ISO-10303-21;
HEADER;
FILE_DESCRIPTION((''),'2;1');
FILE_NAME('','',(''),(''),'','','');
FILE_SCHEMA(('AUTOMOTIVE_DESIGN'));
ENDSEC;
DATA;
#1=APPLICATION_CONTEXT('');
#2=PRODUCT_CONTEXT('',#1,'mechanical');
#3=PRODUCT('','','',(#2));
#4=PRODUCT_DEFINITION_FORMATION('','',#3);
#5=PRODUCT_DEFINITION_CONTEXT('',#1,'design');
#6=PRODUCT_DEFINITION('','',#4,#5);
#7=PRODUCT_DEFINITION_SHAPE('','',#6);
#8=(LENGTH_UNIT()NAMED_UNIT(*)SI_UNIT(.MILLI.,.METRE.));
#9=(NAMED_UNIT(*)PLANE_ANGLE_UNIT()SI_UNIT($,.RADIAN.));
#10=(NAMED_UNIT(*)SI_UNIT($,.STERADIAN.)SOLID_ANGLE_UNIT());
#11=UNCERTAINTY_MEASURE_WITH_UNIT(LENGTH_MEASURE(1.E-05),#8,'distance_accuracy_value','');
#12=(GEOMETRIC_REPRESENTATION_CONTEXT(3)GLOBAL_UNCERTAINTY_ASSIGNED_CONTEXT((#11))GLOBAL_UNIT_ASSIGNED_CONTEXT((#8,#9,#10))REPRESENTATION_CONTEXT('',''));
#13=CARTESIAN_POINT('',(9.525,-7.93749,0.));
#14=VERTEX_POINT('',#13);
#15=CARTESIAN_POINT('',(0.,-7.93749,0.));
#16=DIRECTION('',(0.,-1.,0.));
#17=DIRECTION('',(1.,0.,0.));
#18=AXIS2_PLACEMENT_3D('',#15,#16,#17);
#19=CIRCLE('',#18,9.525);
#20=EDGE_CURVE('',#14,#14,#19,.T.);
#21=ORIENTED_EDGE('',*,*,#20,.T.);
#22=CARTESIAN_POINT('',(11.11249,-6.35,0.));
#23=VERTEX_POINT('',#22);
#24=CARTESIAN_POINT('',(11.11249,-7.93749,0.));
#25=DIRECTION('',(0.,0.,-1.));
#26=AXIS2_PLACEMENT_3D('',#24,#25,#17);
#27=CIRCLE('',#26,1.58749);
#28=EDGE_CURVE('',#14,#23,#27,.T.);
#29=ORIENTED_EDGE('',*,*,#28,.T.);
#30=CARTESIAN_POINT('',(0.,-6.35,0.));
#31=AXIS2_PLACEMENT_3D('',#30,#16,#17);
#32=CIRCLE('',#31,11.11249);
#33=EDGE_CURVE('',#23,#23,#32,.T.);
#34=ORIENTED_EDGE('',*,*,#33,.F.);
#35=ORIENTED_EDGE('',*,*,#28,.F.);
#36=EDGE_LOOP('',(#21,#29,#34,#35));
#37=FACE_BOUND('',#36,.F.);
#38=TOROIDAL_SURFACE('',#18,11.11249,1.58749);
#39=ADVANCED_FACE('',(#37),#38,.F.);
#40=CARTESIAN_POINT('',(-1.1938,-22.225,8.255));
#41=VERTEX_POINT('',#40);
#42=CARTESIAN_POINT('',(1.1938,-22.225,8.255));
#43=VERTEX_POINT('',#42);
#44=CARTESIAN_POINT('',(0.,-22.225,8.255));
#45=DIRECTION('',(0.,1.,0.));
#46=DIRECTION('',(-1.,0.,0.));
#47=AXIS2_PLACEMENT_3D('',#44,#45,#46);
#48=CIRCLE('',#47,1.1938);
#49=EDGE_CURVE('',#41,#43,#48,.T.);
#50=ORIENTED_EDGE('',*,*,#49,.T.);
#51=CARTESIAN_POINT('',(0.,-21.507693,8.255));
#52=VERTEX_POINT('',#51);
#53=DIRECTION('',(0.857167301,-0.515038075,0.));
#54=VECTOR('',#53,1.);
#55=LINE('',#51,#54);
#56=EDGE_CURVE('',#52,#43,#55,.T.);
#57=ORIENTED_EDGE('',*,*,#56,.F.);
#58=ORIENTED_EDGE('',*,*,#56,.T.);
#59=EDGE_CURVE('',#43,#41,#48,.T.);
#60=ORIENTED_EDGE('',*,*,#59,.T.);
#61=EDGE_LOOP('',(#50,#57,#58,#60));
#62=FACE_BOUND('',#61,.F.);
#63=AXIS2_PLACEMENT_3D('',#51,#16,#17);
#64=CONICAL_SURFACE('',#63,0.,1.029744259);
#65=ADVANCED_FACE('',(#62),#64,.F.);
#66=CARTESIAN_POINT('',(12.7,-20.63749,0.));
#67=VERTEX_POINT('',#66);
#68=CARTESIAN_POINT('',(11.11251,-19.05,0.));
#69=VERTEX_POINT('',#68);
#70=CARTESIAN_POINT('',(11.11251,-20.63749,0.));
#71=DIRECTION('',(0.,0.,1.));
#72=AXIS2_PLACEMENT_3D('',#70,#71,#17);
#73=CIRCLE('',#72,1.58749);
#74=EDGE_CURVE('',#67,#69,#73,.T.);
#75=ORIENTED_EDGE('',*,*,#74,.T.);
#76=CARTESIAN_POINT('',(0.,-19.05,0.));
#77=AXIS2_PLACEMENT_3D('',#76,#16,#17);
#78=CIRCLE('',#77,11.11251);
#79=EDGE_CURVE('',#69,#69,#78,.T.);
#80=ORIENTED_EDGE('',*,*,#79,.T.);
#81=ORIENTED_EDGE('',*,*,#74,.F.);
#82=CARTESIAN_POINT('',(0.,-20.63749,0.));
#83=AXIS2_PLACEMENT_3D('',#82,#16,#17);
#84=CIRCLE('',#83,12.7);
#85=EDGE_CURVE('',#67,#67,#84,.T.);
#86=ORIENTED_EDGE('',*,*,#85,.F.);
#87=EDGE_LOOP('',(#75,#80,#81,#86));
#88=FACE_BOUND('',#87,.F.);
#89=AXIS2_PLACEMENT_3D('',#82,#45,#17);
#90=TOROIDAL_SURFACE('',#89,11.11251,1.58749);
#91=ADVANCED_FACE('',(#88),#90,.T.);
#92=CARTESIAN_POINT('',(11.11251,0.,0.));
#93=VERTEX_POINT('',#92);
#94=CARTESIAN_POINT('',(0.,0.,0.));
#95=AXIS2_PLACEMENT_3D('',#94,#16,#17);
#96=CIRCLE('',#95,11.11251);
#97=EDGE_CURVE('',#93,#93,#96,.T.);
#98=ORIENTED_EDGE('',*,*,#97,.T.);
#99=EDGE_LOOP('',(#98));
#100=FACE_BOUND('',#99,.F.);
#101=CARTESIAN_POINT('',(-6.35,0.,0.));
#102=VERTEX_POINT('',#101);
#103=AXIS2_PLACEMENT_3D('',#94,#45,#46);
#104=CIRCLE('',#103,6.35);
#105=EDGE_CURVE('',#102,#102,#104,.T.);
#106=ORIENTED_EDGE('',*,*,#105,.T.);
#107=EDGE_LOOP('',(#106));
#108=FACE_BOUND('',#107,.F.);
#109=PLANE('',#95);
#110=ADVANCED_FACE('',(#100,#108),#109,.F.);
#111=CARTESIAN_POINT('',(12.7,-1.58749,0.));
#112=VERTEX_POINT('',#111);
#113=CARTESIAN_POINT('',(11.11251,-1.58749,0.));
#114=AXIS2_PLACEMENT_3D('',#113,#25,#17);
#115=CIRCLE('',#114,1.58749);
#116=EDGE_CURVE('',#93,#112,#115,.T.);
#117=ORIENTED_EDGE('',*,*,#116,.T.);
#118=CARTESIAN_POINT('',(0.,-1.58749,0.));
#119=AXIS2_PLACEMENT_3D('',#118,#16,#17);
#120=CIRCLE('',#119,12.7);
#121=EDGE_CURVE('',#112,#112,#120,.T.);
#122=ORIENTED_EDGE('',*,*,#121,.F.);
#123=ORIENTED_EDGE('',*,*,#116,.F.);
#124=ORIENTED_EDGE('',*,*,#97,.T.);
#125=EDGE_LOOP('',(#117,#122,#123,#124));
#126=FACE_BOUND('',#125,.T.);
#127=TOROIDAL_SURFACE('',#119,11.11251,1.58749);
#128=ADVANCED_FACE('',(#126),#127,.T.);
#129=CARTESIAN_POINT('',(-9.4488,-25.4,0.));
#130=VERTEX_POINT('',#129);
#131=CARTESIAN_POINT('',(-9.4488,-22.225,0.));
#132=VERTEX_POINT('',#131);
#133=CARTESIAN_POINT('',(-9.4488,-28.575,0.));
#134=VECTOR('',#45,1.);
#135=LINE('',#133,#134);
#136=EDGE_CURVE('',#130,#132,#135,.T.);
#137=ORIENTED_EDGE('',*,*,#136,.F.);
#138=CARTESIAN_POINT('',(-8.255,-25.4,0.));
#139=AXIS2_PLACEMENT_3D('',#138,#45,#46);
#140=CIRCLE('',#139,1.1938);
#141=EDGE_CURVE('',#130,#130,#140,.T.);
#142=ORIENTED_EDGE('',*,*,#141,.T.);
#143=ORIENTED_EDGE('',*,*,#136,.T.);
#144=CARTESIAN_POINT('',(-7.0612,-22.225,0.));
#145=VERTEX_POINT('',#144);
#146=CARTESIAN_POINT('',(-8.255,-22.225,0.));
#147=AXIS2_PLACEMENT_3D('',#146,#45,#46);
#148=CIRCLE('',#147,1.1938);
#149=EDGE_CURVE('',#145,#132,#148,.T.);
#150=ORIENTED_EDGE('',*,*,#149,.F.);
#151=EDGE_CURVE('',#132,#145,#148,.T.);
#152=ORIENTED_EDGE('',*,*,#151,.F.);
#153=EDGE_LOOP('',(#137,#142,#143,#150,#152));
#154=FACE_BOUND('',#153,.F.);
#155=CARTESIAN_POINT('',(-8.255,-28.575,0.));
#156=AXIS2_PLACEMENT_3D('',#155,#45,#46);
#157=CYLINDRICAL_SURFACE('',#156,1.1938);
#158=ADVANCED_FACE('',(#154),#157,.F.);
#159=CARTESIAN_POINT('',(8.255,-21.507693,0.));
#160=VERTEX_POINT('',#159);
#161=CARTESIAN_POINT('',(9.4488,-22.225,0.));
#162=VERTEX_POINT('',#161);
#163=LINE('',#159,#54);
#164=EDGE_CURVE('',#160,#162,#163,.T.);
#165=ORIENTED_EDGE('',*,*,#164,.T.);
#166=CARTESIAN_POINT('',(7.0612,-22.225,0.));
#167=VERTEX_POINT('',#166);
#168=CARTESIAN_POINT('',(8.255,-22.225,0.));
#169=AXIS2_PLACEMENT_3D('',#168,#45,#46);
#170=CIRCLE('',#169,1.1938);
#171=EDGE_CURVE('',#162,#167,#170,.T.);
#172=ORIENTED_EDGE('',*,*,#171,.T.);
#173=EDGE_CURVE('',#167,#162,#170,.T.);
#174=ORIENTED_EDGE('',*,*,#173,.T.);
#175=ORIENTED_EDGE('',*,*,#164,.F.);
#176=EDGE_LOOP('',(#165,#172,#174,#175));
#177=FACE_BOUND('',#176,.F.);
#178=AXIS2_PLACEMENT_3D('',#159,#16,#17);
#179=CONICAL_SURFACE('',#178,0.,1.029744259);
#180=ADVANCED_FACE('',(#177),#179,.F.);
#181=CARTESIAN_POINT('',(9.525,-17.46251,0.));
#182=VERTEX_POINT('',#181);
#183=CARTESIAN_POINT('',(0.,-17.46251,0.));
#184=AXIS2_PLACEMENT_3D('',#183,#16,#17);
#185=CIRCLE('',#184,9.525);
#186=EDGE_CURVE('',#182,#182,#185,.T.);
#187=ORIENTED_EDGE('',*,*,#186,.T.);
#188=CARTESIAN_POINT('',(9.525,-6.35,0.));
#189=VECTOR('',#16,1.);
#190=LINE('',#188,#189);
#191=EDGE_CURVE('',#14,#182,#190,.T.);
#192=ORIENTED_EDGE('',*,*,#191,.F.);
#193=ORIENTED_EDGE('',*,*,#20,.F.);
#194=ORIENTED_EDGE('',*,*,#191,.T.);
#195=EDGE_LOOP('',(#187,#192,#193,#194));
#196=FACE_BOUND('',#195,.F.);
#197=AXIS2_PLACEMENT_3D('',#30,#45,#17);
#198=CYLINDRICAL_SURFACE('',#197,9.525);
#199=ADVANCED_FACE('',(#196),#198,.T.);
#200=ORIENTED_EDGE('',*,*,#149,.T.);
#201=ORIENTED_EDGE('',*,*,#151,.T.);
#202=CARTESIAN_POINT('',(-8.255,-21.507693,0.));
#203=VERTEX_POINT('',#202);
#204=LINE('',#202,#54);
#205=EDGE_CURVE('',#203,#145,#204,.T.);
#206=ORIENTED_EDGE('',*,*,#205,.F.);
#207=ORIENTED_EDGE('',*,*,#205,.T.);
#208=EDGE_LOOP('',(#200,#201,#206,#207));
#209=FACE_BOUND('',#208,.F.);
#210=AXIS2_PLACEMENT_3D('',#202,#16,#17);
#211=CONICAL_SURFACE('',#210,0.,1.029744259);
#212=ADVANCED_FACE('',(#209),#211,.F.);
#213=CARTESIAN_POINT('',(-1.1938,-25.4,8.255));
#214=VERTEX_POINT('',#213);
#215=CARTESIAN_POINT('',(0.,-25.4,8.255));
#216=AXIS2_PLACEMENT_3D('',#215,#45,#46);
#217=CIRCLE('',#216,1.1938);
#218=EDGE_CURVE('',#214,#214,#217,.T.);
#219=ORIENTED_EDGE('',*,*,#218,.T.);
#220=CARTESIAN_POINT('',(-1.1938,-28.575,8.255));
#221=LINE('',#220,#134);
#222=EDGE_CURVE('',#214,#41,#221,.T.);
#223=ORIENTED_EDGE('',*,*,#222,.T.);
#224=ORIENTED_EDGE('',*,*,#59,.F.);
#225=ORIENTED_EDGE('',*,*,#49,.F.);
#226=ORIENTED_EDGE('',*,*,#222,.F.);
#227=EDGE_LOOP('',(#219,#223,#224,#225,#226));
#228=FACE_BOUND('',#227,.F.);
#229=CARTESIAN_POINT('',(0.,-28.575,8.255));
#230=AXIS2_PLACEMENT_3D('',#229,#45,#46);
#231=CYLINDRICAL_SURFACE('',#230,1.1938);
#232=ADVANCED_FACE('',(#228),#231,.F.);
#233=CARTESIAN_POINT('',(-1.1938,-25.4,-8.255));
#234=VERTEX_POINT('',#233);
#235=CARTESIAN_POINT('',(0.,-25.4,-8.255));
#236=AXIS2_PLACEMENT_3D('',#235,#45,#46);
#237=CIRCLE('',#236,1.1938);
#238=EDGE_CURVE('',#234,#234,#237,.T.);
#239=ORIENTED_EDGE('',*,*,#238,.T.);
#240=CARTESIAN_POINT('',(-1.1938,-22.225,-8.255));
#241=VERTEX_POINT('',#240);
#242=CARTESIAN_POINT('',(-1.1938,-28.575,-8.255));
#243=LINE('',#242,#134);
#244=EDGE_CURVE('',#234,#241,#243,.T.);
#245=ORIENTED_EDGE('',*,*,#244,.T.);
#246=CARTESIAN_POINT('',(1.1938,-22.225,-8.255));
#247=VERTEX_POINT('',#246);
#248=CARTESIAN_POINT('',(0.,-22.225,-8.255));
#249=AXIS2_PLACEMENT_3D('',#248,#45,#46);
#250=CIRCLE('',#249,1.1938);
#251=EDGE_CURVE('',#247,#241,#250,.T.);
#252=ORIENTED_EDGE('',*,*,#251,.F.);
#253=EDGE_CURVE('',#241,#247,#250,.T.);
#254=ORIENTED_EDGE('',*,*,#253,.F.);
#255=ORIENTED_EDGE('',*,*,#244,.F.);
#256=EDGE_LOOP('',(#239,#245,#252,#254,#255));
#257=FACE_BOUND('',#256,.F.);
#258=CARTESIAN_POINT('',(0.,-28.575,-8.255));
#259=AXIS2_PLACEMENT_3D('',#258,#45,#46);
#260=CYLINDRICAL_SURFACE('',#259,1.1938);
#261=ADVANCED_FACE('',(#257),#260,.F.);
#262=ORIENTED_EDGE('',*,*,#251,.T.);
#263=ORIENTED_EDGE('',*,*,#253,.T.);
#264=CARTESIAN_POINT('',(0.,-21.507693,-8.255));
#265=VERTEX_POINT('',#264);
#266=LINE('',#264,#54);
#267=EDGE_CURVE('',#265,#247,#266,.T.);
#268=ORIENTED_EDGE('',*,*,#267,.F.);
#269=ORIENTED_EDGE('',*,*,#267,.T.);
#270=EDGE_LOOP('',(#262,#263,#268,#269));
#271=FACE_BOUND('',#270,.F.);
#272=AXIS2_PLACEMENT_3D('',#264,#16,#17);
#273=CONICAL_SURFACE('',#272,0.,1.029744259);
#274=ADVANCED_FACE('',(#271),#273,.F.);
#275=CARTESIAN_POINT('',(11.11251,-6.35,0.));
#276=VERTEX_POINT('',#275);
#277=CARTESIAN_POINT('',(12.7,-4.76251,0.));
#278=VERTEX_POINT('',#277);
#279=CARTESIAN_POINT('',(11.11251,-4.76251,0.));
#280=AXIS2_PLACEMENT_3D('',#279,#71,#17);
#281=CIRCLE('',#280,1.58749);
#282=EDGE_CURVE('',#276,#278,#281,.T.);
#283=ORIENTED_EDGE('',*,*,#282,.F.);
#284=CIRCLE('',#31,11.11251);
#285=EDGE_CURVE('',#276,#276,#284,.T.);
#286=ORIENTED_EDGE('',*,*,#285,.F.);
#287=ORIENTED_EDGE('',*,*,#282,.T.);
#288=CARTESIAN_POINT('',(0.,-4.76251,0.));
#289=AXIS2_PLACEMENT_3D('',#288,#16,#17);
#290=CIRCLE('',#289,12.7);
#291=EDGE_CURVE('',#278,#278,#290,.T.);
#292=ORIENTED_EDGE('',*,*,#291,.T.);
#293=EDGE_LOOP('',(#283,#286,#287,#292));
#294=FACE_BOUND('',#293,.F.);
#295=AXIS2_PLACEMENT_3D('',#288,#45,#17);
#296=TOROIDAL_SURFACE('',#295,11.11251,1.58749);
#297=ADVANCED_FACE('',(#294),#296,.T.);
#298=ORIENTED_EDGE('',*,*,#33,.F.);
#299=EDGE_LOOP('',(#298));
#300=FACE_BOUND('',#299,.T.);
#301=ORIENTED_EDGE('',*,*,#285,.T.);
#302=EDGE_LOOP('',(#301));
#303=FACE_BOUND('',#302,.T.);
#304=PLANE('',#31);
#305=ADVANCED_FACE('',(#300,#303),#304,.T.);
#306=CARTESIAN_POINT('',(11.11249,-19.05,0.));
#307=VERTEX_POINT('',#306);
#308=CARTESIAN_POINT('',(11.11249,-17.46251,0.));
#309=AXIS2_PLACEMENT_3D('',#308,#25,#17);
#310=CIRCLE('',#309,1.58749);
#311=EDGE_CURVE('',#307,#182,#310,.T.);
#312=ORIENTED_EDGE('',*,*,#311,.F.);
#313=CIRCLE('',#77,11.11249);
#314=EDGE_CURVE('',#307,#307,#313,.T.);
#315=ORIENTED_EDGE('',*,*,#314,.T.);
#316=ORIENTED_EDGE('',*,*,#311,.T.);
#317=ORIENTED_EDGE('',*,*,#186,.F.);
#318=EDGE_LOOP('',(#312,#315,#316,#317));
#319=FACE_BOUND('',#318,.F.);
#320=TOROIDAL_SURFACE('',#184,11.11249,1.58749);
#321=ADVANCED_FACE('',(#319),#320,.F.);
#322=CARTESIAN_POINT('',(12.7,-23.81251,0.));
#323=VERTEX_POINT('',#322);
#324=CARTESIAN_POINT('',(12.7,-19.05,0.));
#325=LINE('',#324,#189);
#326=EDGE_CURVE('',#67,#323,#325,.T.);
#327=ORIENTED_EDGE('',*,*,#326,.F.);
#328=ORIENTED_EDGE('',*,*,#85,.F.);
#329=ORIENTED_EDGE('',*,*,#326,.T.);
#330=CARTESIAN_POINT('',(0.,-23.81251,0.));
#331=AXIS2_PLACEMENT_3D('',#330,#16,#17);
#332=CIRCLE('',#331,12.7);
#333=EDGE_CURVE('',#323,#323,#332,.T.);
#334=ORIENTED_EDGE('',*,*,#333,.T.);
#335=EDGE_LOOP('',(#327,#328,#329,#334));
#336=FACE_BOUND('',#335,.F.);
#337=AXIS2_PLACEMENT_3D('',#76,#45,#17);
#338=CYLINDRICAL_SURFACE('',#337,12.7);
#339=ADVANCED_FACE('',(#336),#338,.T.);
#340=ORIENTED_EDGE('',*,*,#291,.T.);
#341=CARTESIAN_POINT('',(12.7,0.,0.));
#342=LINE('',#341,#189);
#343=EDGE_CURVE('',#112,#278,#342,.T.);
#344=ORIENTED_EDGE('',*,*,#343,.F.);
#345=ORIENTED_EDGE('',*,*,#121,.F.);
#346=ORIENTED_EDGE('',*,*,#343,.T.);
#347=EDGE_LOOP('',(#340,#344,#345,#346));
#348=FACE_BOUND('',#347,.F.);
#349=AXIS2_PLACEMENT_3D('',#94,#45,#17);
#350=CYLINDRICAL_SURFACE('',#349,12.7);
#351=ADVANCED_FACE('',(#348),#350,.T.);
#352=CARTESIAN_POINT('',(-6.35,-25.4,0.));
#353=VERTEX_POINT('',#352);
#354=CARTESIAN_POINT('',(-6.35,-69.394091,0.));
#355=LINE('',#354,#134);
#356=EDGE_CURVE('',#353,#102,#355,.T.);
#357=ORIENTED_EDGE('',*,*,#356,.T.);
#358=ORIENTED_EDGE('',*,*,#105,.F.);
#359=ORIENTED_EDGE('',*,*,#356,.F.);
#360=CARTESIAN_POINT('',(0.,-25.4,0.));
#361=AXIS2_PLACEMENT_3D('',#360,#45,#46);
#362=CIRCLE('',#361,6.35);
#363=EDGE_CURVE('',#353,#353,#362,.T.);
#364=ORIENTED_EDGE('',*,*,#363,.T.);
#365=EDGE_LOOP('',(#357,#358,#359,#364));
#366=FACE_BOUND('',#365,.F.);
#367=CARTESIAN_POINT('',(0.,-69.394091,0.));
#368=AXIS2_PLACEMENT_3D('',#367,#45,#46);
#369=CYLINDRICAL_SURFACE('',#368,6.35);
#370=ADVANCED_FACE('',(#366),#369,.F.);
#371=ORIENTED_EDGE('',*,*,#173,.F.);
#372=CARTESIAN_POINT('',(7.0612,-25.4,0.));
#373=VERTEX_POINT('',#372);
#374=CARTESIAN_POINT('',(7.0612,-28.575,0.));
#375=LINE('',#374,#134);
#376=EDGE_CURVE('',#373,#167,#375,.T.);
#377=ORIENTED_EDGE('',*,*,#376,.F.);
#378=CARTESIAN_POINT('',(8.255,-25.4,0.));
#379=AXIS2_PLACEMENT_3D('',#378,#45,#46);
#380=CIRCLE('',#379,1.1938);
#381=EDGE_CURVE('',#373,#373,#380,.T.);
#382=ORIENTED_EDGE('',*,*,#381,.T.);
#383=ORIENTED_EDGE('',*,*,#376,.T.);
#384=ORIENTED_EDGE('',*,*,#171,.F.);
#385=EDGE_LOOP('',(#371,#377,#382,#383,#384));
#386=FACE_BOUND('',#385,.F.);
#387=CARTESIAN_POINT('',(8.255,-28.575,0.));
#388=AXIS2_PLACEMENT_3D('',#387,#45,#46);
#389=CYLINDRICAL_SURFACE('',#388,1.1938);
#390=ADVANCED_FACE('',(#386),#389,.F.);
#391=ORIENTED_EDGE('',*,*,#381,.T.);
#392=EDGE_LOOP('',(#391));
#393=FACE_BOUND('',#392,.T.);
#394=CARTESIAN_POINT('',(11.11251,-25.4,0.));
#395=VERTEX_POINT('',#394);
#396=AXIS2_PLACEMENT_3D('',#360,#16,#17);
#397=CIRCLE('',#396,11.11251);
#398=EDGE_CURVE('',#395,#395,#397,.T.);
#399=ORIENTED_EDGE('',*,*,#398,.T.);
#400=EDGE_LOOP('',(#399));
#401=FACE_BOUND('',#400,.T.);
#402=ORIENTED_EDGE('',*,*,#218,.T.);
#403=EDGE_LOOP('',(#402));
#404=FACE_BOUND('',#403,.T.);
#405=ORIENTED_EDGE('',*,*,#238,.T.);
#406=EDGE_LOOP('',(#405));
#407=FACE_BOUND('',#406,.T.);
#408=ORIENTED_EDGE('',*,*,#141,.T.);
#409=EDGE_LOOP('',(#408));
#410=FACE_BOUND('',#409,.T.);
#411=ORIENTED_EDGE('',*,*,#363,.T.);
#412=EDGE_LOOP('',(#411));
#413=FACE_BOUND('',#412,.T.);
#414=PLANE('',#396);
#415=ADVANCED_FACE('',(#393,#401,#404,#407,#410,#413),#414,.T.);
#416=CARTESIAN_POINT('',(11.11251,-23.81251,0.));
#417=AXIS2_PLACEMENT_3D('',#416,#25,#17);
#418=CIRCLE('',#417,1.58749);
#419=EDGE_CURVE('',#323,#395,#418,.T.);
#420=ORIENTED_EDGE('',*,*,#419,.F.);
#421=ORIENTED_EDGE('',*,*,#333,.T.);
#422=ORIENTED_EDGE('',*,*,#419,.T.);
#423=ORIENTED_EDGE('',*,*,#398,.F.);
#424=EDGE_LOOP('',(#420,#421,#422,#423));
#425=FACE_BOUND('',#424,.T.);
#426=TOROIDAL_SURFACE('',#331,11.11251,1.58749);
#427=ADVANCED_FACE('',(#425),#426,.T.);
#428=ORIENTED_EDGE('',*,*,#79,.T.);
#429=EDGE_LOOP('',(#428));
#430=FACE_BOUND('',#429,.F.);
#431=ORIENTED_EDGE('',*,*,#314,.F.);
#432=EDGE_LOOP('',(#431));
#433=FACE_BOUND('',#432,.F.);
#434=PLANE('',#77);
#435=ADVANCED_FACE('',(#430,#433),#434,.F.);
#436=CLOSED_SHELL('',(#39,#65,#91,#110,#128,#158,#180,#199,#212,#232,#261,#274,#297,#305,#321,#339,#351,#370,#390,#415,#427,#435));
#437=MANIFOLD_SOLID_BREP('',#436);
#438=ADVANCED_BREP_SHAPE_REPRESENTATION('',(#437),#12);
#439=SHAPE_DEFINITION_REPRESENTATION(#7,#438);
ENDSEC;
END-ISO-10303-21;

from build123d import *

# Parameters (mm, degrees)
F0_R     = 12.7
F1_DEPTH = 6.35
F2_R     = 9.525
F3_DEPTH = 12.7
F4_R     = 12.7
F4_R_2   = 9.525
F5_DEPTH = 6.35
F7_D     = 12.7
F8_D     = 2.3876
F8_DEPTH = 3.175
F8_TIP   = 0.717307407
F9_R     = 1.58749


# Not quite as in the source:
# - a fillet or chamfer is up to 0.001 mm smaller than in the source, because OpenCascade refuses the exact size


with BuildPart() as f1:
    # F0 (on Front) → F1 (new body)
    with BuildSketch(Plane.XZ):
        Circle(F0_R)
    extrude(amount=F1_DEPTH)

    # F2 (on face) → F3 (join)
    with BuildSketch(Plane.XZ.offset(6.35)):
        Circle(F2_R)
    extrude(amount=F3_DEPTH)

    # F4 (on face) → F5 (join)
    with BuildSketch(Plane.XZ.offset(19.05)):
        Circle(F4_R)
        Circle(F4_R_2, mode=Mode.SUBTRACT)
        Circle(F4_R_2)
    extrude(amount=F5_DEPTH)

    # F7 (through all)
    with Locations(Plane.XZ.offset(25.4)):
        with Locations((0, 0)):
            Hole(F7_D / 2)

    # F8
    with Locations(Plane.XZ.offset(25.4)):
        with Locations((0, 8.255), (-8.255, 0), (0, -8.255), (8.255, 0)):
            Hole(F8_D / 2, depth=F8_DEPTH)
            with Locations((0, 0, -(F8_DEPTH + F8_TIP / 2))):  # 118° drill point
                Cone(0, F8_D / 2, F8_TIP, mode=Mode.SUBTRACT)

    # F9 (radius 1.5875 in the source; OpenCascade refuses exactly that, so slightly less here)
    f9_edges = [f1.edges().sort_by_distance(p)[0] for p in [
        (-12.7, -25.4, 0),
        (-12.7, -19.05, 0),
        (-12.7, -6.35, 0),
        (-12.7, 0, 0),
        (-9.525, -6.35, 0),
        (-9.525, -19.05, 0),
    ]]
    fillet(f9_edges, radius=F9_R)


solid = f1.part
